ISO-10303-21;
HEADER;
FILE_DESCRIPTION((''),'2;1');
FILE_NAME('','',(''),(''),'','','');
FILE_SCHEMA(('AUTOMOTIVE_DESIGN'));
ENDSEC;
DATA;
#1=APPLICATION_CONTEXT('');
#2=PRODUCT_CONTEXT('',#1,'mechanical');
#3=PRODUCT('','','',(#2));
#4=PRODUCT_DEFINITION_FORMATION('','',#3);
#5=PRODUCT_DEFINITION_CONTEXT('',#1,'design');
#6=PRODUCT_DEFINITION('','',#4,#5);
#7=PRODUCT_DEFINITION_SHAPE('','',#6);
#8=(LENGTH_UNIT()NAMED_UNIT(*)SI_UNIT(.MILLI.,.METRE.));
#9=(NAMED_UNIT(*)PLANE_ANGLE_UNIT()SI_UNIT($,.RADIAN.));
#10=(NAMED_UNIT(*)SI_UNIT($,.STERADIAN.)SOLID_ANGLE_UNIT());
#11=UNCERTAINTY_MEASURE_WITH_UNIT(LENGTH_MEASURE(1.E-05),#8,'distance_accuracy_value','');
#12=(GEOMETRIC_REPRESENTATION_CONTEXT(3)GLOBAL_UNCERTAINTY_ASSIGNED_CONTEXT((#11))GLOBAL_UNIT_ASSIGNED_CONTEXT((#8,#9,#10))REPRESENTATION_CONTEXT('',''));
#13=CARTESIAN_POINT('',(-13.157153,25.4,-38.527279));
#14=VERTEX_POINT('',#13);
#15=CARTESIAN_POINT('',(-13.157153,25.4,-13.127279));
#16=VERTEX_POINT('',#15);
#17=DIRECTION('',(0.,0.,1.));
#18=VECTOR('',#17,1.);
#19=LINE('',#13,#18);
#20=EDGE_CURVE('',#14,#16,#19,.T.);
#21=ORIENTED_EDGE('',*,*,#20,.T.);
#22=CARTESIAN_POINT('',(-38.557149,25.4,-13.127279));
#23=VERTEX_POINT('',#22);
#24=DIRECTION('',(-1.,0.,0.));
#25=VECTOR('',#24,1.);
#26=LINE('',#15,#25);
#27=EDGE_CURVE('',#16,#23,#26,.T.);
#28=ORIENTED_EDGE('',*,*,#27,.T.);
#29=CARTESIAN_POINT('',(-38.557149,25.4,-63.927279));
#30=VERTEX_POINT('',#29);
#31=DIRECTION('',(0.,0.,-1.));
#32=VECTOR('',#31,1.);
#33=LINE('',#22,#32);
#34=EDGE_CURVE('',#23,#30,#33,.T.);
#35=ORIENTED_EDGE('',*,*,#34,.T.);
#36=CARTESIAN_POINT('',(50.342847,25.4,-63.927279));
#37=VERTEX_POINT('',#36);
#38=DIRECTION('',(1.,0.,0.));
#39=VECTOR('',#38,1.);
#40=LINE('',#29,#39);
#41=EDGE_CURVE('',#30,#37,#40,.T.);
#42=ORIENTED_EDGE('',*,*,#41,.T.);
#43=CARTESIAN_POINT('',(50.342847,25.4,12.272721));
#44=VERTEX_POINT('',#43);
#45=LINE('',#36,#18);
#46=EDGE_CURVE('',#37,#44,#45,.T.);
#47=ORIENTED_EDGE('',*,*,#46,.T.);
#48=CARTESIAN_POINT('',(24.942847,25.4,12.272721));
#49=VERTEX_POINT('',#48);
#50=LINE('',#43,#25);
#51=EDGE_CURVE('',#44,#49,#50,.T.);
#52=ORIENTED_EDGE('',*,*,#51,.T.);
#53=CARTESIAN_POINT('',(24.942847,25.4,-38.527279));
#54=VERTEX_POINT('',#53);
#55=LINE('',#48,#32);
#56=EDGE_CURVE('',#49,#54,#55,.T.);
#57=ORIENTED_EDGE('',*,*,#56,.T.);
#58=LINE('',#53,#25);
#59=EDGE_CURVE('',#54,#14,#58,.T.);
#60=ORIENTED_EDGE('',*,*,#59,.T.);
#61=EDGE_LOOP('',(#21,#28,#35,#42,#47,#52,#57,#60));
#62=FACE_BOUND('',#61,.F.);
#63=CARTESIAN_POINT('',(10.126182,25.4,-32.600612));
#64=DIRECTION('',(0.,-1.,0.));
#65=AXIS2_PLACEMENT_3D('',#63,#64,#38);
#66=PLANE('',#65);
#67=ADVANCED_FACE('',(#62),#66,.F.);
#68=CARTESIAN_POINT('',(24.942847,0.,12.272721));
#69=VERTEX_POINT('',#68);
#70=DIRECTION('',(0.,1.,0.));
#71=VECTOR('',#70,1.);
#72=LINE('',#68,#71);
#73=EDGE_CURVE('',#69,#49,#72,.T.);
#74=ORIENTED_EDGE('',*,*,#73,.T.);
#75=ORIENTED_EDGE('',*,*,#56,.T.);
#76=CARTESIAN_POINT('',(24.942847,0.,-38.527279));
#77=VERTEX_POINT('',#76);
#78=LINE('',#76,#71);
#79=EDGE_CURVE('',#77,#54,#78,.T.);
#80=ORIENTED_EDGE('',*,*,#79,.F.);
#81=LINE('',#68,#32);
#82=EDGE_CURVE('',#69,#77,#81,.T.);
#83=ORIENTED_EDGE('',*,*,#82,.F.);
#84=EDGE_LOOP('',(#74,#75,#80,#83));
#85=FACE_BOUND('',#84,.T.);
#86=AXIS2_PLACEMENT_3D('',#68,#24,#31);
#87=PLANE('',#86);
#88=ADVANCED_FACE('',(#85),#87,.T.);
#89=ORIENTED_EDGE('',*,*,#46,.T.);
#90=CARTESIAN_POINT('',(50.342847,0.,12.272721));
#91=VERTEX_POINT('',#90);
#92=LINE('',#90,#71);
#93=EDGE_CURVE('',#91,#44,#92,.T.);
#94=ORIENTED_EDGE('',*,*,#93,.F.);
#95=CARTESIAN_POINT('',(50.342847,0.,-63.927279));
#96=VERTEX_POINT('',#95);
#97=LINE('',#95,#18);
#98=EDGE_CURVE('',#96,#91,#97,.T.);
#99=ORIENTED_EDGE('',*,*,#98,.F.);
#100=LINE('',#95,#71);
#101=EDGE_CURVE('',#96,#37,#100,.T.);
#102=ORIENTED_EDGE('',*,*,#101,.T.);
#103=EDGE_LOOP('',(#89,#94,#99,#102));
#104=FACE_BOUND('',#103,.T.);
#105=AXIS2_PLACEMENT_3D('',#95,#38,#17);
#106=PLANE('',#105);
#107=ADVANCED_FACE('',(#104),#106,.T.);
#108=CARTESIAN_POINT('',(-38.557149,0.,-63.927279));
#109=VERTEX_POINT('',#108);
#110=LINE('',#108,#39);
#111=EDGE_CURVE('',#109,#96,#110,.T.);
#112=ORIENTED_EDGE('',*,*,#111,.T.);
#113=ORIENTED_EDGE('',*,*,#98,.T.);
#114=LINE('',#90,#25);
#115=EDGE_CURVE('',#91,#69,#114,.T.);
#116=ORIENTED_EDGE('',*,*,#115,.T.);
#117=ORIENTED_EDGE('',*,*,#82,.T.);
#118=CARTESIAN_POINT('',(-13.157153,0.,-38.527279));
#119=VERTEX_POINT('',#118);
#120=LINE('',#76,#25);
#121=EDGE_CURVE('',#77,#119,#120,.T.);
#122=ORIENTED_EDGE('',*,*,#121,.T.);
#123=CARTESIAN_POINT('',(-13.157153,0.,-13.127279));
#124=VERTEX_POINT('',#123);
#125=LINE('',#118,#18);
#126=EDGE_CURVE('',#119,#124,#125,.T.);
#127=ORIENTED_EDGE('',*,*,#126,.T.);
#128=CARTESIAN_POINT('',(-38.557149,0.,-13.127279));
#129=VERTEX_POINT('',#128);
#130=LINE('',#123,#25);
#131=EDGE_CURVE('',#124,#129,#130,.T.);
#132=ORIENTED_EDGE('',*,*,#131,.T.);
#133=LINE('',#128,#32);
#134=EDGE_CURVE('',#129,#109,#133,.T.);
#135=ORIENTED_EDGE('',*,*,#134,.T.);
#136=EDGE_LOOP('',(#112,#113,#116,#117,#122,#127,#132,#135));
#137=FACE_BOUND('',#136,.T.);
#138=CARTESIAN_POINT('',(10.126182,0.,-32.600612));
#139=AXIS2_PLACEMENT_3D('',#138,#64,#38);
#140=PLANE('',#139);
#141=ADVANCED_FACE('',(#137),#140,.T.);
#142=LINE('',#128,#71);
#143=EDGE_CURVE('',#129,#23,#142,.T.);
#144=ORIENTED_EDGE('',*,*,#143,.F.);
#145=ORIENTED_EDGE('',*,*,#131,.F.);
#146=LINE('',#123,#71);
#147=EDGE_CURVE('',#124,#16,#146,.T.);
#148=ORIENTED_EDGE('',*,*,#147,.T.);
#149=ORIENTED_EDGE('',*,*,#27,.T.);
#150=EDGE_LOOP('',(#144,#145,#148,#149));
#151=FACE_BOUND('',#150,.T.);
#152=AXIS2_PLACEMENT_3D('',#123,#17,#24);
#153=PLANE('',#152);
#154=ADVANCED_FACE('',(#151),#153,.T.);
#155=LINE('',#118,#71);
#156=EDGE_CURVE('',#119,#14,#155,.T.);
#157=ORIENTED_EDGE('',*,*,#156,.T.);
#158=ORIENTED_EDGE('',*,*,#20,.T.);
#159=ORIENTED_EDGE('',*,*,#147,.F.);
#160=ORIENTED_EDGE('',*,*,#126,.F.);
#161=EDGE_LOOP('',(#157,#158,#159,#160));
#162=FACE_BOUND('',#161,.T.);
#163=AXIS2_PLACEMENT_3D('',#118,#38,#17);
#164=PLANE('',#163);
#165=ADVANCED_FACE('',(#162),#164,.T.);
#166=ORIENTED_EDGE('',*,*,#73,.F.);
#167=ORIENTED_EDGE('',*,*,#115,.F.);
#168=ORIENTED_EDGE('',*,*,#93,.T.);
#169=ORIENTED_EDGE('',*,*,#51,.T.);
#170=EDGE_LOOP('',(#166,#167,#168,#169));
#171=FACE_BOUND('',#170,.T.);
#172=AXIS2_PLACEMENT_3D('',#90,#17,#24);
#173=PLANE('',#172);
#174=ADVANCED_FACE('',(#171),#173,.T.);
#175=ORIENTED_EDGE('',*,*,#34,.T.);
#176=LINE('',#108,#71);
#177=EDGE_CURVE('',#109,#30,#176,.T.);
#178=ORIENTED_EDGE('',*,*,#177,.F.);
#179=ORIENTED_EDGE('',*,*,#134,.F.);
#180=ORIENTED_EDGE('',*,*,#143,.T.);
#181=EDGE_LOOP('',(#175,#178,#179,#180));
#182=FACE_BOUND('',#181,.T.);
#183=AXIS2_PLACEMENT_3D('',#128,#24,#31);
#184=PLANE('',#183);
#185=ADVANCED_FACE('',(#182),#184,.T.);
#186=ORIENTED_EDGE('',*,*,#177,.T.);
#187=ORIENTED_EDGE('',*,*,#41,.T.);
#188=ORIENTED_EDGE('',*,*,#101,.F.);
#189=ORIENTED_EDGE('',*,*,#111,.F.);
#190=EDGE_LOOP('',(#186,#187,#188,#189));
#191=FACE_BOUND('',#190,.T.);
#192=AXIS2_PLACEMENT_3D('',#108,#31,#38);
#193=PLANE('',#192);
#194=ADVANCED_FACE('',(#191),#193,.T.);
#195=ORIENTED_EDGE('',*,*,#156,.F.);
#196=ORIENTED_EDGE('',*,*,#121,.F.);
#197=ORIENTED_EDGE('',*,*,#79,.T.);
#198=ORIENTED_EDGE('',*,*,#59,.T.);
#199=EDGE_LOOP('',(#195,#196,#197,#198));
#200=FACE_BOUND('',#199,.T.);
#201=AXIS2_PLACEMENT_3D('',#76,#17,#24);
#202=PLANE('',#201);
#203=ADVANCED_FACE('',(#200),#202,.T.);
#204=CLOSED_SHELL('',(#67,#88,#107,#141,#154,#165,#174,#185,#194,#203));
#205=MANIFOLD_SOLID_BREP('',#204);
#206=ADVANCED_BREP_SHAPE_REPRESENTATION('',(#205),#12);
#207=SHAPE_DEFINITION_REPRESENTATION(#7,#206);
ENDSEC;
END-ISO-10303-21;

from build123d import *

# Parameters (mm, degrees)
F1_DEPTH = 25.4


# Not quite as in the source:
# - ends of sketch curves that miss each other by under 0.0002 mm in the source are joined


with BuildPart() as f1:
    # F0 (on Front) → F1 (new body)
    with BuildSketch(Plane.XZ):
        Polygon((-38.5571492787, -13.1272786043), (-38.5571492787, -63.9272786043), (50.3428467333, -63.9272786043), (50.3428467333, 12.2727213957), (24.9428467333, 12.2727213957), (24.9428467333, -38.5272786043), (-13.1571532667, -38.5272786043), (-13.1571532667, -13.1272786043), align=None)
    extrude(amount=-F1_DEPTH)


solid = f1.part
